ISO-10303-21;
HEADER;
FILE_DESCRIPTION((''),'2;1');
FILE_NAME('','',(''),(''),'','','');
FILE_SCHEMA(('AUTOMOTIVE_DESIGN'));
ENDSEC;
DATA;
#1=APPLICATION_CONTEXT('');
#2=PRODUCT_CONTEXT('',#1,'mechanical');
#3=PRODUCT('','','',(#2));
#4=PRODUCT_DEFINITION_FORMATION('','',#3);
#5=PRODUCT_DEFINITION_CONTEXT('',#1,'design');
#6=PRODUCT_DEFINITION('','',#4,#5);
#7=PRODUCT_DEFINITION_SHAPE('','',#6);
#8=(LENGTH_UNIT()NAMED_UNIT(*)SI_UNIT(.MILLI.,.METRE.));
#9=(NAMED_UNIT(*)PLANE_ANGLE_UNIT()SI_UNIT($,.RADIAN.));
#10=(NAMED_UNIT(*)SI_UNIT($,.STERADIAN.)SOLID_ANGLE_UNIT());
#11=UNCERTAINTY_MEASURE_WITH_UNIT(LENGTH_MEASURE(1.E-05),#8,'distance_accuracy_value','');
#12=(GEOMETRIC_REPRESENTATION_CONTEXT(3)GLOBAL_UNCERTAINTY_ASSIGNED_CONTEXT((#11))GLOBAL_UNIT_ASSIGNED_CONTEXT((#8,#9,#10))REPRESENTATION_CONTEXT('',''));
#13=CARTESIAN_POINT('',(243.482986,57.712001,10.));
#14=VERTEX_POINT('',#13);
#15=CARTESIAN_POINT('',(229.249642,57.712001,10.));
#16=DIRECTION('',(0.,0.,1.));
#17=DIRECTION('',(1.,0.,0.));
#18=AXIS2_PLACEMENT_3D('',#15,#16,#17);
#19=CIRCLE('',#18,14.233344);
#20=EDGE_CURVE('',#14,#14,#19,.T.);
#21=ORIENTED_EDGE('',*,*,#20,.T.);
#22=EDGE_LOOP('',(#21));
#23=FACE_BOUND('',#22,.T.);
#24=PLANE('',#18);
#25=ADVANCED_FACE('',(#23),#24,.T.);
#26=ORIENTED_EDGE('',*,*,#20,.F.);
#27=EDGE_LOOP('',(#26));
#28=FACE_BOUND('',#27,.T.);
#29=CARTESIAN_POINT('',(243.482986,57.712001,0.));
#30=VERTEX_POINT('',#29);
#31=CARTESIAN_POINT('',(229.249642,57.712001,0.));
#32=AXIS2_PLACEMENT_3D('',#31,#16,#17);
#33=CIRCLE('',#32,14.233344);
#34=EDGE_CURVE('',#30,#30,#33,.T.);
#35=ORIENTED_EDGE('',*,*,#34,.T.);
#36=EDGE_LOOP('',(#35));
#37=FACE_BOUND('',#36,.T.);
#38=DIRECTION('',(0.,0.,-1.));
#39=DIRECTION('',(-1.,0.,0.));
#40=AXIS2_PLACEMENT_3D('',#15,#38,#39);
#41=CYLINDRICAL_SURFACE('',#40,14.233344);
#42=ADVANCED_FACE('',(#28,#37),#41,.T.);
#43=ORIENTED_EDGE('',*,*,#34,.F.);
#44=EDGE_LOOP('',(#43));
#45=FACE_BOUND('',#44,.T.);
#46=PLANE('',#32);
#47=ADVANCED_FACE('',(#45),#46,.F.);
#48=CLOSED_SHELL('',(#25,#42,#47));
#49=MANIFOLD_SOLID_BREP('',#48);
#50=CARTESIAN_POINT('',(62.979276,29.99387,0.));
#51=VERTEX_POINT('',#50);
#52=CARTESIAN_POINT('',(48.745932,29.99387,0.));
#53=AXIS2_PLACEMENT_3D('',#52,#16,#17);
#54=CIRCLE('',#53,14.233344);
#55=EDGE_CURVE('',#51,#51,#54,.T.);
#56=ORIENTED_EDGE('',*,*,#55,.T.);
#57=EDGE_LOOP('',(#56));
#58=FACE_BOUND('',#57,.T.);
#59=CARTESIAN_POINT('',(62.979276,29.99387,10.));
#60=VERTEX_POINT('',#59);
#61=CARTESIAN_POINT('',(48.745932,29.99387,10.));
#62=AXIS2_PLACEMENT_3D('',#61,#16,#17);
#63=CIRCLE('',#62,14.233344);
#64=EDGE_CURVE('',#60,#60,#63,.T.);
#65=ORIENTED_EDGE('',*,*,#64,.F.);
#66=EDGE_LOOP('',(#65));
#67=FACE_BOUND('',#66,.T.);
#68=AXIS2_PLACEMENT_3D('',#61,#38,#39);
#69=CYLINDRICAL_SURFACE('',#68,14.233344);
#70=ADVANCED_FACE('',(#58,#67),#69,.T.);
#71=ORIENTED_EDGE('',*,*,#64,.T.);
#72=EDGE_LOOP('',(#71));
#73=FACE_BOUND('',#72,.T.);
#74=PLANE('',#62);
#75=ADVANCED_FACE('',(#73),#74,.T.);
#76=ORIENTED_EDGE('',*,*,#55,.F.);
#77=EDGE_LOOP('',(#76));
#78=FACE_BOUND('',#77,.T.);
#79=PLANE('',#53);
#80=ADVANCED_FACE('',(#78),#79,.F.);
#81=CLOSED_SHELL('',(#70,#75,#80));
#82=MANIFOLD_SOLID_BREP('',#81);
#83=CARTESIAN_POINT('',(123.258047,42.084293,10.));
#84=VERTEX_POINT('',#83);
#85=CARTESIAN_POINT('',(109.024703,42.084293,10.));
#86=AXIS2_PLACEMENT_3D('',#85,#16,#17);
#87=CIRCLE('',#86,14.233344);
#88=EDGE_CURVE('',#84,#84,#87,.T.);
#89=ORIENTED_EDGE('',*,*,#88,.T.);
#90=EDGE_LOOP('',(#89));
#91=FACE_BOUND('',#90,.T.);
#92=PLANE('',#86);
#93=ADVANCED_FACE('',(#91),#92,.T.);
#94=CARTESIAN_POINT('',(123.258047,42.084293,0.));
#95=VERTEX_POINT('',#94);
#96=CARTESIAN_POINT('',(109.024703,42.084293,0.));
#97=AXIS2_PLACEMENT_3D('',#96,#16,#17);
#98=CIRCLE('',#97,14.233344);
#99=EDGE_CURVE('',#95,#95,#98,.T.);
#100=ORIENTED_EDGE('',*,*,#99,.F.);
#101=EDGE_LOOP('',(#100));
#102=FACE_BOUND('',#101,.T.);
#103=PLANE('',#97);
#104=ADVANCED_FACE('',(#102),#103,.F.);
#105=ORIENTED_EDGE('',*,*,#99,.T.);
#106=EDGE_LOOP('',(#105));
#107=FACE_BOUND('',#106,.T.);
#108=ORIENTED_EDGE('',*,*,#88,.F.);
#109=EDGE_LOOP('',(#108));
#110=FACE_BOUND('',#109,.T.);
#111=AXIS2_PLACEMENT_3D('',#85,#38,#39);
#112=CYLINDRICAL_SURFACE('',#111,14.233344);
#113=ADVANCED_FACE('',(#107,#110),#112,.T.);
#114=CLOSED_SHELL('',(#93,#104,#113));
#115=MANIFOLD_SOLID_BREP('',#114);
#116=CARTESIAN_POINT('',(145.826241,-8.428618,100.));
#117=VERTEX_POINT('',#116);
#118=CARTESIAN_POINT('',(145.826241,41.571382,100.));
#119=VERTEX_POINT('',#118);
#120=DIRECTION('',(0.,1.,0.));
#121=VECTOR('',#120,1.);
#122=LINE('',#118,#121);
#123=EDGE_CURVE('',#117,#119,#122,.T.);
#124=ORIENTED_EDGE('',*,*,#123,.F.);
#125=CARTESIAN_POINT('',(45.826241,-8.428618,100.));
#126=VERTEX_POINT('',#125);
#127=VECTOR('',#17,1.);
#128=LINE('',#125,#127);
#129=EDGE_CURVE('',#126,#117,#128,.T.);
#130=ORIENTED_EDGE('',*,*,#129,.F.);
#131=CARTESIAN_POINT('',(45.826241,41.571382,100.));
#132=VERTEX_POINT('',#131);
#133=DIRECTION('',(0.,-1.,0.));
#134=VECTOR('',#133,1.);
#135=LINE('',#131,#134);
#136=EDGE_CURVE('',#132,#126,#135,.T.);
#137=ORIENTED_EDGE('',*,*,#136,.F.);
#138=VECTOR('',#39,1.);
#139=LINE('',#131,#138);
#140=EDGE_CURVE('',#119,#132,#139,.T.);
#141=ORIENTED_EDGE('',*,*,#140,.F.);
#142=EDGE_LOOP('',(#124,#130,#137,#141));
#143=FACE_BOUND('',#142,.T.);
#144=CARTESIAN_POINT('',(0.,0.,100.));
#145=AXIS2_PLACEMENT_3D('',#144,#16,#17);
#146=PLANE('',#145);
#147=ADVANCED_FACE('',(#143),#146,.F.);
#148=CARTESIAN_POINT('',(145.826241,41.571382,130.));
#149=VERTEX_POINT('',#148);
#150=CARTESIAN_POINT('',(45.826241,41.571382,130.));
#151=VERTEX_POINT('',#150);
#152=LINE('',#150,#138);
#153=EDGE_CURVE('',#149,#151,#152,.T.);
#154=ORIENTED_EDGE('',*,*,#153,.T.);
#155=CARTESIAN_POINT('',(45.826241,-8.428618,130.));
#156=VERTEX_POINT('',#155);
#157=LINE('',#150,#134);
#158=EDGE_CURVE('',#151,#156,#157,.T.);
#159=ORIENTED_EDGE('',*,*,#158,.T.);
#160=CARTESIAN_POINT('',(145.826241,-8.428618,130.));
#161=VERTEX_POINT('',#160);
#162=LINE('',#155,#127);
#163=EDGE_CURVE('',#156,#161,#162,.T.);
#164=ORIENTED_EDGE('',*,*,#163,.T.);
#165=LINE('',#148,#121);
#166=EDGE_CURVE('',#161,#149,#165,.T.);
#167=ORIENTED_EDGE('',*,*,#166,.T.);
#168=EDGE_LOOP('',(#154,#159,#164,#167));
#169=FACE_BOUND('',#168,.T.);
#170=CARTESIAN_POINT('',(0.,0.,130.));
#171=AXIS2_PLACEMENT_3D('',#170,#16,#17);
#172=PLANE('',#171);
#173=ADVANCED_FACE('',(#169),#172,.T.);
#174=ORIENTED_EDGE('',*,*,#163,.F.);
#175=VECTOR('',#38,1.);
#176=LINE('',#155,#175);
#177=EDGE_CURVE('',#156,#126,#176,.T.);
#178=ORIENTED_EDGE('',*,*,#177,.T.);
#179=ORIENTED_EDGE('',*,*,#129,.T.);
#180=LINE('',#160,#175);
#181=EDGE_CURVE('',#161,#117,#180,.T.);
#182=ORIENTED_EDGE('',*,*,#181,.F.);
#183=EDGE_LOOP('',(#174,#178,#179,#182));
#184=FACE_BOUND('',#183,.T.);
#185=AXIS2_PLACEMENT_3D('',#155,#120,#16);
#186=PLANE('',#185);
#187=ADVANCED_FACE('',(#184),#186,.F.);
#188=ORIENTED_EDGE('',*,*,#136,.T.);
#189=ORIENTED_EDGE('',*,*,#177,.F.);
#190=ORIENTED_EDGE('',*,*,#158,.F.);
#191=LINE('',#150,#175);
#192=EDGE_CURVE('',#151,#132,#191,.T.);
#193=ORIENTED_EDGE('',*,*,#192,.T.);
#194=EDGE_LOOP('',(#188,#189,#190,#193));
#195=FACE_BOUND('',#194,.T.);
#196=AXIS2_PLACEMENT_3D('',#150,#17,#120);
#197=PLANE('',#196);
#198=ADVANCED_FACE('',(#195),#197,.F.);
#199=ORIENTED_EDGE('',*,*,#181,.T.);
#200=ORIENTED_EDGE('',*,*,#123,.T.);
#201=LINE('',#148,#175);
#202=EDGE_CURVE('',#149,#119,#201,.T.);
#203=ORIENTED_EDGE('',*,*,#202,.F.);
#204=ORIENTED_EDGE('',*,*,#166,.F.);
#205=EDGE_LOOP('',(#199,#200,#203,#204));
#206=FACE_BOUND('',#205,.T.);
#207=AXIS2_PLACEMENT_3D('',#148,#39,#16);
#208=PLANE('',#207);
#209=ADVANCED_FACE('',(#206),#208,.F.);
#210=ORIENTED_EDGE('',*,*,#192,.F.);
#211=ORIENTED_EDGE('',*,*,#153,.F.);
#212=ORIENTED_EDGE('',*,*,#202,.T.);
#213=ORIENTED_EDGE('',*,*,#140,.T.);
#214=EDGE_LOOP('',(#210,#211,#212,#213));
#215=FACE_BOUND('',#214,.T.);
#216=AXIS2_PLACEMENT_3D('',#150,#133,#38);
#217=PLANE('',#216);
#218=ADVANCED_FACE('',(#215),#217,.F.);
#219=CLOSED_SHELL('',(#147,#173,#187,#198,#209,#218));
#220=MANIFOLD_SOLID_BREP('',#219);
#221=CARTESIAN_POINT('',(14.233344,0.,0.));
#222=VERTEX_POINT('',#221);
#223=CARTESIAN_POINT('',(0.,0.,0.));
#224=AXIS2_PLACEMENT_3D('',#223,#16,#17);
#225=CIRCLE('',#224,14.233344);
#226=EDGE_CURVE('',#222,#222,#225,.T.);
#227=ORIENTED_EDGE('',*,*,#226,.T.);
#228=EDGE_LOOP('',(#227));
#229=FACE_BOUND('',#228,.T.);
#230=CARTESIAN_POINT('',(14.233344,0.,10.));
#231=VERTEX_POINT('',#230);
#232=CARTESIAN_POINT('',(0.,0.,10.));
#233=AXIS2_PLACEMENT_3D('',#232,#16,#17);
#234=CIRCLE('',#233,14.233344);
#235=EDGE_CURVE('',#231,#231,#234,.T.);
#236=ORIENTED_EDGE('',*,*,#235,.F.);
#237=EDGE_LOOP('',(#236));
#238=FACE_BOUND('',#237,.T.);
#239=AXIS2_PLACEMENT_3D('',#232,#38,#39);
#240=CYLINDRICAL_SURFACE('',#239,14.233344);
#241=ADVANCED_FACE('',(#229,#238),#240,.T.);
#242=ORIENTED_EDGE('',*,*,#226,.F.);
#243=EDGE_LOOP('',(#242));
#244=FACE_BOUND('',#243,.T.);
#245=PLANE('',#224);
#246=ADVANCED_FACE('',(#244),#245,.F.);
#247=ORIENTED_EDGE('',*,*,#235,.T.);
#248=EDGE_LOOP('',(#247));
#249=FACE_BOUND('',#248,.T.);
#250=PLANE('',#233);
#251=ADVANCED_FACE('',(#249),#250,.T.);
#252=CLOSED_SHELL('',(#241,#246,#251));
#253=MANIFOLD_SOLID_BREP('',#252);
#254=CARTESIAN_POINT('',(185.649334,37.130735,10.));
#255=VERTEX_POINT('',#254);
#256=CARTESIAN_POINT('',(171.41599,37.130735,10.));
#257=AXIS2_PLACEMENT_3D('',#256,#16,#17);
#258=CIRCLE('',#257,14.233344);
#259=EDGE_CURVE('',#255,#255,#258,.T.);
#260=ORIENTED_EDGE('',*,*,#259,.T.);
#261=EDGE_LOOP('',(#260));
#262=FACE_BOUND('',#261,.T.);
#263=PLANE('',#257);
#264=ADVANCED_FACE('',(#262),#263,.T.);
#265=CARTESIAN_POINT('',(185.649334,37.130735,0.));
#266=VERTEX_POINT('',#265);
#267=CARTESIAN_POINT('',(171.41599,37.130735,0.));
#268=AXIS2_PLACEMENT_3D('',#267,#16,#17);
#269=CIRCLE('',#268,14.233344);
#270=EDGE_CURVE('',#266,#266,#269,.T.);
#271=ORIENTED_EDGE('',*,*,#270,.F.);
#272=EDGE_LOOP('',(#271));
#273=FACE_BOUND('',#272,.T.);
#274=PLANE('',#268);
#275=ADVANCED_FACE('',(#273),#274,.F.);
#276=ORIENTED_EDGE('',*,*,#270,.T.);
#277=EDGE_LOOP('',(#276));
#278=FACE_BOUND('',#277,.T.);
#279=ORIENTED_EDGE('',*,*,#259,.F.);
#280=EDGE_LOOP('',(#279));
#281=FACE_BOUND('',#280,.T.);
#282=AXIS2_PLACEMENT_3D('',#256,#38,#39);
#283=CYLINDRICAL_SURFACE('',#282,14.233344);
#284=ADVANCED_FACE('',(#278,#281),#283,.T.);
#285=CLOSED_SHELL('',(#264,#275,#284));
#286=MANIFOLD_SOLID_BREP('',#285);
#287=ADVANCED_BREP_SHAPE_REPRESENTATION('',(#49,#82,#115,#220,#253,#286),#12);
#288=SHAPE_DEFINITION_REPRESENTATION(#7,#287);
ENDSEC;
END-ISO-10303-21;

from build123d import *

# Parameters (mm, degrees)
SKETCH_1_R                = 14.233343999
EXTRUDE_1_DEPTH           = 10
PATTERN_CURVE_1_OUTLINE_R = 14.233343999
PATTERN_CURVE_1_DEPTH     = 10
SKETCH_3_W                = 100
SKETCH_3_H                = 50
EXTRUDE_2_DEPTH           = 30


# Read off the part's stored shape, not the designer's step: 曲线阵列1
with BuildPart() as part:
    # 草图1 → 凸台-拉伸1 (new body)
    with BuildSketch(Plane.XY):
        Circle(SKETCH_1_R)
    extrude(amount=EXTRUDE_1_DEPTH)


with BuildPart() as body_2:
    # 曲线阵列1 outline → 曲线阵列1 (new body)
    with BuildSketch(Plane.XY):
        with Locations((229.249642157, 57.71200111)):
            Circle(PATTERN_CURVE_1_OUTLINE_R)
        with Locations((171.415989903, 37.130735449)):
            Circle(PATTERN_CURVE_1_OUTLINE_R)
        with Locations((109.024703037, 42.084293113)):
            Circle(PATTERN_CURVE_1_OUTLINE_R)
        with Locations((48.745932251, 29.993869517)):
            Circle(PATTERN_CURVE_1_OUTLINE_R)
    extrude(amount=PATTERN_CURVE_1_DEPTH)


with BuildPart() as body_3:
    # 草图3 → 凸台-拉伸2 (new body)
    with BuildSketch(Plane.XY.offset(100)):
        with Locations((95.826241383, 16.571381789)):
            Rectangle(SKETCH_3_W, SKETCH_3_H)
    extrude(amount=EXTRUDE_2_DEPTH)


solid = Compound([part.part, body_2.part, body_3.part])
